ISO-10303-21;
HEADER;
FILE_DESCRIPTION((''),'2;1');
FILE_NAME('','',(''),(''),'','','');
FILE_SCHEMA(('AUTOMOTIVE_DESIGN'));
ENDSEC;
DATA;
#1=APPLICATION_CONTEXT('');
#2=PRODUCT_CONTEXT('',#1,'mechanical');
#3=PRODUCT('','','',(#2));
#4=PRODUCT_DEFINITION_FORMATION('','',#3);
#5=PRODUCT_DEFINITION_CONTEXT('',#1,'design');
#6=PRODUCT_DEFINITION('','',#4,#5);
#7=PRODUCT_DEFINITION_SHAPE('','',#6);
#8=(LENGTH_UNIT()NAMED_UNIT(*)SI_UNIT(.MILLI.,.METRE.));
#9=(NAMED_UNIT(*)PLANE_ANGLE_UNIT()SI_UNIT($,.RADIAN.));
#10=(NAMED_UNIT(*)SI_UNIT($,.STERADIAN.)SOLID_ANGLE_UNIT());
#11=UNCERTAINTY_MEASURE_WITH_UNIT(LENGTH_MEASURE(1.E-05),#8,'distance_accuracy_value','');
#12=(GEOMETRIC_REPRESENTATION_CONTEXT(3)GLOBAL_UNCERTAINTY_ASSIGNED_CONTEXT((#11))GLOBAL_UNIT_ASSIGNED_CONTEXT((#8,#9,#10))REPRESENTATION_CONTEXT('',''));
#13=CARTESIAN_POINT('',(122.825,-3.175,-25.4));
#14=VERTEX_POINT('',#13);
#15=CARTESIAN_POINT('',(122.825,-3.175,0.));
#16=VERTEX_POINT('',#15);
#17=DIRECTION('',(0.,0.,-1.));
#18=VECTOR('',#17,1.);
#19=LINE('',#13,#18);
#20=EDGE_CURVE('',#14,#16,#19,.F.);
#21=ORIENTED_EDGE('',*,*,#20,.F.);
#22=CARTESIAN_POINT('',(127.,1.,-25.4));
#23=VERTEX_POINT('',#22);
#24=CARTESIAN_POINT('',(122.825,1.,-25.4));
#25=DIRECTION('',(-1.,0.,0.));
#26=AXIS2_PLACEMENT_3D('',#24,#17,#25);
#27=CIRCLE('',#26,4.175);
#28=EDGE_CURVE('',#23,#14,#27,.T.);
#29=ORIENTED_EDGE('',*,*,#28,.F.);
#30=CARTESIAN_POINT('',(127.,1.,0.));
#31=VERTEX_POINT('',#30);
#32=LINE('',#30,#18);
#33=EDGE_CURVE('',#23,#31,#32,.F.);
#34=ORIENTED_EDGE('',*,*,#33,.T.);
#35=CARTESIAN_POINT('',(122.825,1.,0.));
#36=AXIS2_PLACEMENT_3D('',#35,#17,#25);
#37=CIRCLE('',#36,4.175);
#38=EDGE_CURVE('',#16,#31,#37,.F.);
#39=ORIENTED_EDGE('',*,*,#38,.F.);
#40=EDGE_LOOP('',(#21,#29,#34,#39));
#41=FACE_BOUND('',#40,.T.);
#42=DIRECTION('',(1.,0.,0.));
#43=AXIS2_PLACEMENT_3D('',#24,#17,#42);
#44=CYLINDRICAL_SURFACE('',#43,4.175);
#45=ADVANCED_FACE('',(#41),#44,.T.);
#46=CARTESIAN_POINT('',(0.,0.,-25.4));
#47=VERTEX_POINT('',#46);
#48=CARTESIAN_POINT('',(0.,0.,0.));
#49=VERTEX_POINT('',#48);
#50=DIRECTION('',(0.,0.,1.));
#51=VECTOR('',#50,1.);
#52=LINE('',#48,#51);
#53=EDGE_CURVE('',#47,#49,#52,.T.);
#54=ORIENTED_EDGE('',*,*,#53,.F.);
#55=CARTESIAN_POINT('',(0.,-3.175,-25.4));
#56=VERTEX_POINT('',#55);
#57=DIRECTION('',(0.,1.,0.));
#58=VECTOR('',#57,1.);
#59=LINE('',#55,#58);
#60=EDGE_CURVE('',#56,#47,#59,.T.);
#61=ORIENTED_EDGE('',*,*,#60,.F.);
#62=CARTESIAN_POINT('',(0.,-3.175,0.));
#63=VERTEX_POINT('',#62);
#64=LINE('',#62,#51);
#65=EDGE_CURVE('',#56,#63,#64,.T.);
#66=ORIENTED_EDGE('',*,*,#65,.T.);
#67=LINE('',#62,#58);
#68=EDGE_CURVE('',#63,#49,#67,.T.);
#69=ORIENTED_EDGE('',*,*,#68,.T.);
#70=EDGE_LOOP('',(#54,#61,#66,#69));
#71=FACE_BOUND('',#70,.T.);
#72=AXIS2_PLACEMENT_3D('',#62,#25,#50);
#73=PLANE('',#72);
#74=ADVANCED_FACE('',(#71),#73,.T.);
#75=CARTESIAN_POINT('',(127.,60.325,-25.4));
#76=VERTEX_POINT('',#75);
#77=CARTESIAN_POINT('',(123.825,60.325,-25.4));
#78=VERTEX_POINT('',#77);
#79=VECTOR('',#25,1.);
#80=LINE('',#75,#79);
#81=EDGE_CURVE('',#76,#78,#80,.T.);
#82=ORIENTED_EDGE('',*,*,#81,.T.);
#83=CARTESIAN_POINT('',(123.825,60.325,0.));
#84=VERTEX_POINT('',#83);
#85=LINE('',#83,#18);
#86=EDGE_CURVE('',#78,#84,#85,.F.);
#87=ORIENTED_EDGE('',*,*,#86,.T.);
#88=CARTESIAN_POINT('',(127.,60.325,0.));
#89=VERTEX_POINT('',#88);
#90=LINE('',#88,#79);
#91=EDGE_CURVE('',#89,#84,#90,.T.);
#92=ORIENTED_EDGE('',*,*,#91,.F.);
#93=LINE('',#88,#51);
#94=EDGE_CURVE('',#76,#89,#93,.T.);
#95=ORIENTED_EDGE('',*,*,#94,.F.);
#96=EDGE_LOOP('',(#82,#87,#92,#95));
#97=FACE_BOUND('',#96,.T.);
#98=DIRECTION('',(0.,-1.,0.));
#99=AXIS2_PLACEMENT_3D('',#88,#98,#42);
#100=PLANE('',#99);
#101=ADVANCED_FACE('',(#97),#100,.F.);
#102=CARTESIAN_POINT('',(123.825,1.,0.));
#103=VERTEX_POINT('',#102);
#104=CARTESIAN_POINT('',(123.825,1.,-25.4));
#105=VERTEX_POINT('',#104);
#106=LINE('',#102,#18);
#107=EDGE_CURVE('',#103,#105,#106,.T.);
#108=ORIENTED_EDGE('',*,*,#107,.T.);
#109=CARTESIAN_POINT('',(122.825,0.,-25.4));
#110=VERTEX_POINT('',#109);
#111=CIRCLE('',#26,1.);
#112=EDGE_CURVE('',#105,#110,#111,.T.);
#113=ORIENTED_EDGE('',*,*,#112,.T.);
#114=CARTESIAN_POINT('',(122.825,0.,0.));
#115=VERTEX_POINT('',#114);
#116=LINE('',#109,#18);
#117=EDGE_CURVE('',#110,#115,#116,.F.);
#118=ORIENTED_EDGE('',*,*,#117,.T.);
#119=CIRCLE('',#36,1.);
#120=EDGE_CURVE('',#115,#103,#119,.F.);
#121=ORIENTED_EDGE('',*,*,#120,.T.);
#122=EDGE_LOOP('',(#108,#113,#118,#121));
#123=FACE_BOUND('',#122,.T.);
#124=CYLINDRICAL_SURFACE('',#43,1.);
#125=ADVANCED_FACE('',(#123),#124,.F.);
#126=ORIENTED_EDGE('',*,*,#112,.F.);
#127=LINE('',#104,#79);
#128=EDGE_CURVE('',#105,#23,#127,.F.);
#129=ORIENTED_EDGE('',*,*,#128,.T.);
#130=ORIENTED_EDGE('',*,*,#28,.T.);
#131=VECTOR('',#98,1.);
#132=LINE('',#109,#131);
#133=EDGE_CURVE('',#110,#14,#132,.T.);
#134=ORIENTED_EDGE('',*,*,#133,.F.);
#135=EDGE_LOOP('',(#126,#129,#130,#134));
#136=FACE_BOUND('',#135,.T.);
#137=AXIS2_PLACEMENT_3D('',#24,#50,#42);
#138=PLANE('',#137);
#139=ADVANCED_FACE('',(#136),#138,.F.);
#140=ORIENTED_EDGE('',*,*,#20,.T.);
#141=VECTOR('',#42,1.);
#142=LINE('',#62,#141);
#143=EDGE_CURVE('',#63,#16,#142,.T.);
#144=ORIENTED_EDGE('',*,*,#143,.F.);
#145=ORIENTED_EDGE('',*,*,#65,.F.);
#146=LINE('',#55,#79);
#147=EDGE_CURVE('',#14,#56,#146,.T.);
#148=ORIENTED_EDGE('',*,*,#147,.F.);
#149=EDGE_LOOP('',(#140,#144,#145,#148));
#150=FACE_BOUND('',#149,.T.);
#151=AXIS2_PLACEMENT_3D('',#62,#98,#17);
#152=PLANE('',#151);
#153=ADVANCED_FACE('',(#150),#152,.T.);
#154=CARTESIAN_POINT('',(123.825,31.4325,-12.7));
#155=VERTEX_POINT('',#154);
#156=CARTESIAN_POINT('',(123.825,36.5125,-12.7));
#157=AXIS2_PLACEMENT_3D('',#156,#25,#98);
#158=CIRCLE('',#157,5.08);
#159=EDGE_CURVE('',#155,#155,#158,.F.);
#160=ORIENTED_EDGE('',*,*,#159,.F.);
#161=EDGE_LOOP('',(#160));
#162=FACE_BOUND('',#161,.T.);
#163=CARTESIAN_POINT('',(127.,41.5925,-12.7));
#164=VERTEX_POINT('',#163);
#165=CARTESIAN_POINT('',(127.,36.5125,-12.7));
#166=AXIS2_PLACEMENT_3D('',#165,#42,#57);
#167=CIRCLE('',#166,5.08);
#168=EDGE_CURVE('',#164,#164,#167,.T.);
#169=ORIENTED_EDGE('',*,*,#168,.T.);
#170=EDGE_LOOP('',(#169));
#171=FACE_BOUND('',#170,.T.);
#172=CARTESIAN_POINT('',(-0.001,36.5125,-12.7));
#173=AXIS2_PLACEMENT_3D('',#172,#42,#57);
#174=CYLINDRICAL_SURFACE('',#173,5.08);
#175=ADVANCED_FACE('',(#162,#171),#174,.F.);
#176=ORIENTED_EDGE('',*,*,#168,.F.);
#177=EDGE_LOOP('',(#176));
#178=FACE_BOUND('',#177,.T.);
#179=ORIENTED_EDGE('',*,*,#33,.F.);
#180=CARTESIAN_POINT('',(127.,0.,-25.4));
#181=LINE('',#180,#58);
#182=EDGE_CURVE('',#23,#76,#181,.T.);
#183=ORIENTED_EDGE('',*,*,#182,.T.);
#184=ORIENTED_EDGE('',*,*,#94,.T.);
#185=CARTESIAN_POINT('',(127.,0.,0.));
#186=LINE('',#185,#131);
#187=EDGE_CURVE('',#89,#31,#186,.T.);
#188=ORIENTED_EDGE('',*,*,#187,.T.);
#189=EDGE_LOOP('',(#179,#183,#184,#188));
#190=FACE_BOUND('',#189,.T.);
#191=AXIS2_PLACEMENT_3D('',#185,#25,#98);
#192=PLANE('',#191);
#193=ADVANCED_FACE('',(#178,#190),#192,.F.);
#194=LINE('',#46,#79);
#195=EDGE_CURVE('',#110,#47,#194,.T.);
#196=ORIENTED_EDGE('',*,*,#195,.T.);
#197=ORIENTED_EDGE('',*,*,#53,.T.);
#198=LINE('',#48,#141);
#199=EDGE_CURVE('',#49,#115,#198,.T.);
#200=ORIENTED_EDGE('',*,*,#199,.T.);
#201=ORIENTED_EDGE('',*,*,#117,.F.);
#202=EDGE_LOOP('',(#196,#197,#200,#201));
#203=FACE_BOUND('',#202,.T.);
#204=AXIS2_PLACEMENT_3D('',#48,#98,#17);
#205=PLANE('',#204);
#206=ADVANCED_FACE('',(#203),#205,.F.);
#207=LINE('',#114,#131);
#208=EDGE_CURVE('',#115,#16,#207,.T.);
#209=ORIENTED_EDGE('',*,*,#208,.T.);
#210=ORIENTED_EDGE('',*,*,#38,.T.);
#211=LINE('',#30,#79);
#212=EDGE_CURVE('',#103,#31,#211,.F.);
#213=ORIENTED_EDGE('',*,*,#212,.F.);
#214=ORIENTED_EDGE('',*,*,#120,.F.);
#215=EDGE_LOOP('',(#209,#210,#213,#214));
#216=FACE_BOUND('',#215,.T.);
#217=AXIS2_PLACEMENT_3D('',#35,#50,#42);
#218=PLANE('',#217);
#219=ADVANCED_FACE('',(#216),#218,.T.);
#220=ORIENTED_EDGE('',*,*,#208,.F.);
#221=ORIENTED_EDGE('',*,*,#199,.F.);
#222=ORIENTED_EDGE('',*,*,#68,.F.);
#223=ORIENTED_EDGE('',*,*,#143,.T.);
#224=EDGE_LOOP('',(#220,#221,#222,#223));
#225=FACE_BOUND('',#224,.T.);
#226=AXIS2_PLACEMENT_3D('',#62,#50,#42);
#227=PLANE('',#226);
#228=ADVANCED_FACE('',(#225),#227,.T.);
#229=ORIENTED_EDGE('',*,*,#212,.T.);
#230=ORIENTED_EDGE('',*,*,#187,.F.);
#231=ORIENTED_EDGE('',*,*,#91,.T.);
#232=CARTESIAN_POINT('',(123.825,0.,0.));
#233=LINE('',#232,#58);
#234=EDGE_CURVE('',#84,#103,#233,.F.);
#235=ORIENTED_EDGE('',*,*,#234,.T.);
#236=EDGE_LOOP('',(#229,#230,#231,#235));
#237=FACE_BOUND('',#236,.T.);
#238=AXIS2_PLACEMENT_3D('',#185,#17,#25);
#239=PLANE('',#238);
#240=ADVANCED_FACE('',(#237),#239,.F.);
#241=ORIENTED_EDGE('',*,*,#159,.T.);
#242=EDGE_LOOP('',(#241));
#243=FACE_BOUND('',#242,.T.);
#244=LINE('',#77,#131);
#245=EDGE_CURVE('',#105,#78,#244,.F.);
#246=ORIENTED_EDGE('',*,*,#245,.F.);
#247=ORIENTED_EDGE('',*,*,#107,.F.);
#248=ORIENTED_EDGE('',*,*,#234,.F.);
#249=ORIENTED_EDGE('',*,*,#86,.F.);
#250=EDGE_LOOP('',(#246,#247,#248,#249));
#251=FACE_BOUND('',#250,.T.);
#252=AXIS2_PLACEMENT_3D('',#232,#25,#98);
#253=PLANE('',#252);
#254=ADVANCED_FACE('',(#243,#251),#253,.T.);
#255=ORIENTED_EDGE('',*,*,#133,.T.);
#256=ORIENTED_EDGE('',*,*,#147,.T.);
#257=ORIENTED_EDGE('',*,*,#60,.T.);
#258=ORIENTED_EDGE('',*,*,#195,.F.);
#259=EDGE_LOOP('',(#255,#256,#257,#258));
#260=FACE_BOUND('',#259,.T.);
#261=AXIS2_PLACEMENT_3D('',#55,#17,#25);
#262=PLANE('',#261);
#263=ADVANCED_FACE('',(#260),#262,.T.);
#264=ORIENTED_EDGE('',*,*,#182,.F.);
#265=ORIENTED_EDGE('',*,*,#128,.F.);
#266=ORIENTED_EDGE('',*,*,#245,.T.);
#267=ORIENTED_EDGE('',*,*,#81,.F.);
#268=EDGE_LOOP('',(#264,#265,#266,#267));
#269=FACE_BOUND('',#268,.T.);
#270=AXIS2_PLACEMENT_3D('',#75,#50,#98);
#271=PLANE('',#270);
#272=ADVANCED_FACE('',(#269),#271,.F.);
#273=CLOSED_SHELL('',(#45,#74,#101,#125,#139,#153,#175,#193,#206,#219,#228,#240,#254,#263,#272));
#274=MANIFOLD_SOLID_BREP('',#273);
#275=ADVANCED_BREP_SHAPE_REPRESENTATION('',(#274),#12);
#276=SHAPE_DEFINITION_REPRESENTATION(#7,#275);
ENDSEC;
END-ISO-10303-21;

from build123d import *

# Parameters (mm, degrees)
SKETCH2_W                    = 127
SKETCH2_H                    = 25.4
BASE_FLANGE1_DEPTH           = 3.175
EDGE_FLANGE1_STRIP_W         = 14.7
EDGE_FLANGE1_STRIP_H         = 3.175
EDGE_FLANGE1_STRIP_CUT_DEPTH = 25.4
EDGE_FLANGE1_DEPTH           = 25.4
CUT_EXTRUDE1_REACH           = 144.875
SKETCH10_R                   = 5.08


# Sheet-metal steps are written as plain solids
with BuildPart() as part:
    # Sketch2 → Base-Flange1 (new body)
    with BuildSketch(Plane(origin=(0, 0, 0), x_dir=(1, 0, 0), z_dir=(0, 1, 0))):
        with Locations((63.5, 12.7)):
            Rectangle(SKETCH2_W, SKETCH2_H)
    extrude(amount=-BASE_FLANGE1_DEPTH)

    # Edge-Flange1 strip (across the edge) → Edge-Flange1 strip cut (cut)
    with BuildSketch(Plane(origin=(127, 0, 0), x_dir=(-1, 0, 0), z_dir=(0, 0, -1))):
        with Locations((-3.175, -1.5875)):
            Rectangle(EDGE_FLANGE1_STRIP_W, EDGE_FLANGE1_STRIP_H)
    extrude(amount=EDGE_FLANGE1_STRIP_CUT_DEPTH, mode=Mode.SUBTRACT)

    # Edge-Flange1 section (across the edge) → Edge-Flange1 (add)
    with BuildSketch(Plane(origin=(127, 0, 0), x_dir=(-1, 0, 0), z_dir=(0, 0, -1))):
        with BuildLine():
            Line((0, 1), (0, 60.325))
            Line((0, 60.325), (3.175, 60.325))
            Line((3.175, 60.325), (3.175, 1))
            ThreePointArc((3.175, 1), (3.467893219, 0.292893219), (4.175, 0))
            Line((4.175, 0), (4.175, -3.175))
            ThreePointArc((4.175, -3.175), (1.222829189, -1.952170811), (0, 1))
        make_face()
    extrude(amount=EDGE_FLANGE1_DEPTH)

    # Sketch10 → Cut-Extrude1 (cut, up to next)
    with BuildSketch(Plane(origin=(127, 0, 0), x_dir=(0, 0, -1), z_dir=(1, 0, 0)), mode=Mode.PRIVATE) as cut_extrude1_sk1:
        with Locations(Location((12.7, 36.5125, 0), (0, 0, 90))):
            Circle(SKETCH10_R)
    cut_extrude1_tool1 = extrude(cut_extrude1_sk1.sketch, amount=-CUT_EXTRUDE1_REACH, mode=Mode.PRIVATE) & part.part
    add(cut_extrude1_tool1.solids().sort_by_distance((127, 36.5125, -12.7))[0], mode=Mode.SUBTRACT)


solid = part.part
